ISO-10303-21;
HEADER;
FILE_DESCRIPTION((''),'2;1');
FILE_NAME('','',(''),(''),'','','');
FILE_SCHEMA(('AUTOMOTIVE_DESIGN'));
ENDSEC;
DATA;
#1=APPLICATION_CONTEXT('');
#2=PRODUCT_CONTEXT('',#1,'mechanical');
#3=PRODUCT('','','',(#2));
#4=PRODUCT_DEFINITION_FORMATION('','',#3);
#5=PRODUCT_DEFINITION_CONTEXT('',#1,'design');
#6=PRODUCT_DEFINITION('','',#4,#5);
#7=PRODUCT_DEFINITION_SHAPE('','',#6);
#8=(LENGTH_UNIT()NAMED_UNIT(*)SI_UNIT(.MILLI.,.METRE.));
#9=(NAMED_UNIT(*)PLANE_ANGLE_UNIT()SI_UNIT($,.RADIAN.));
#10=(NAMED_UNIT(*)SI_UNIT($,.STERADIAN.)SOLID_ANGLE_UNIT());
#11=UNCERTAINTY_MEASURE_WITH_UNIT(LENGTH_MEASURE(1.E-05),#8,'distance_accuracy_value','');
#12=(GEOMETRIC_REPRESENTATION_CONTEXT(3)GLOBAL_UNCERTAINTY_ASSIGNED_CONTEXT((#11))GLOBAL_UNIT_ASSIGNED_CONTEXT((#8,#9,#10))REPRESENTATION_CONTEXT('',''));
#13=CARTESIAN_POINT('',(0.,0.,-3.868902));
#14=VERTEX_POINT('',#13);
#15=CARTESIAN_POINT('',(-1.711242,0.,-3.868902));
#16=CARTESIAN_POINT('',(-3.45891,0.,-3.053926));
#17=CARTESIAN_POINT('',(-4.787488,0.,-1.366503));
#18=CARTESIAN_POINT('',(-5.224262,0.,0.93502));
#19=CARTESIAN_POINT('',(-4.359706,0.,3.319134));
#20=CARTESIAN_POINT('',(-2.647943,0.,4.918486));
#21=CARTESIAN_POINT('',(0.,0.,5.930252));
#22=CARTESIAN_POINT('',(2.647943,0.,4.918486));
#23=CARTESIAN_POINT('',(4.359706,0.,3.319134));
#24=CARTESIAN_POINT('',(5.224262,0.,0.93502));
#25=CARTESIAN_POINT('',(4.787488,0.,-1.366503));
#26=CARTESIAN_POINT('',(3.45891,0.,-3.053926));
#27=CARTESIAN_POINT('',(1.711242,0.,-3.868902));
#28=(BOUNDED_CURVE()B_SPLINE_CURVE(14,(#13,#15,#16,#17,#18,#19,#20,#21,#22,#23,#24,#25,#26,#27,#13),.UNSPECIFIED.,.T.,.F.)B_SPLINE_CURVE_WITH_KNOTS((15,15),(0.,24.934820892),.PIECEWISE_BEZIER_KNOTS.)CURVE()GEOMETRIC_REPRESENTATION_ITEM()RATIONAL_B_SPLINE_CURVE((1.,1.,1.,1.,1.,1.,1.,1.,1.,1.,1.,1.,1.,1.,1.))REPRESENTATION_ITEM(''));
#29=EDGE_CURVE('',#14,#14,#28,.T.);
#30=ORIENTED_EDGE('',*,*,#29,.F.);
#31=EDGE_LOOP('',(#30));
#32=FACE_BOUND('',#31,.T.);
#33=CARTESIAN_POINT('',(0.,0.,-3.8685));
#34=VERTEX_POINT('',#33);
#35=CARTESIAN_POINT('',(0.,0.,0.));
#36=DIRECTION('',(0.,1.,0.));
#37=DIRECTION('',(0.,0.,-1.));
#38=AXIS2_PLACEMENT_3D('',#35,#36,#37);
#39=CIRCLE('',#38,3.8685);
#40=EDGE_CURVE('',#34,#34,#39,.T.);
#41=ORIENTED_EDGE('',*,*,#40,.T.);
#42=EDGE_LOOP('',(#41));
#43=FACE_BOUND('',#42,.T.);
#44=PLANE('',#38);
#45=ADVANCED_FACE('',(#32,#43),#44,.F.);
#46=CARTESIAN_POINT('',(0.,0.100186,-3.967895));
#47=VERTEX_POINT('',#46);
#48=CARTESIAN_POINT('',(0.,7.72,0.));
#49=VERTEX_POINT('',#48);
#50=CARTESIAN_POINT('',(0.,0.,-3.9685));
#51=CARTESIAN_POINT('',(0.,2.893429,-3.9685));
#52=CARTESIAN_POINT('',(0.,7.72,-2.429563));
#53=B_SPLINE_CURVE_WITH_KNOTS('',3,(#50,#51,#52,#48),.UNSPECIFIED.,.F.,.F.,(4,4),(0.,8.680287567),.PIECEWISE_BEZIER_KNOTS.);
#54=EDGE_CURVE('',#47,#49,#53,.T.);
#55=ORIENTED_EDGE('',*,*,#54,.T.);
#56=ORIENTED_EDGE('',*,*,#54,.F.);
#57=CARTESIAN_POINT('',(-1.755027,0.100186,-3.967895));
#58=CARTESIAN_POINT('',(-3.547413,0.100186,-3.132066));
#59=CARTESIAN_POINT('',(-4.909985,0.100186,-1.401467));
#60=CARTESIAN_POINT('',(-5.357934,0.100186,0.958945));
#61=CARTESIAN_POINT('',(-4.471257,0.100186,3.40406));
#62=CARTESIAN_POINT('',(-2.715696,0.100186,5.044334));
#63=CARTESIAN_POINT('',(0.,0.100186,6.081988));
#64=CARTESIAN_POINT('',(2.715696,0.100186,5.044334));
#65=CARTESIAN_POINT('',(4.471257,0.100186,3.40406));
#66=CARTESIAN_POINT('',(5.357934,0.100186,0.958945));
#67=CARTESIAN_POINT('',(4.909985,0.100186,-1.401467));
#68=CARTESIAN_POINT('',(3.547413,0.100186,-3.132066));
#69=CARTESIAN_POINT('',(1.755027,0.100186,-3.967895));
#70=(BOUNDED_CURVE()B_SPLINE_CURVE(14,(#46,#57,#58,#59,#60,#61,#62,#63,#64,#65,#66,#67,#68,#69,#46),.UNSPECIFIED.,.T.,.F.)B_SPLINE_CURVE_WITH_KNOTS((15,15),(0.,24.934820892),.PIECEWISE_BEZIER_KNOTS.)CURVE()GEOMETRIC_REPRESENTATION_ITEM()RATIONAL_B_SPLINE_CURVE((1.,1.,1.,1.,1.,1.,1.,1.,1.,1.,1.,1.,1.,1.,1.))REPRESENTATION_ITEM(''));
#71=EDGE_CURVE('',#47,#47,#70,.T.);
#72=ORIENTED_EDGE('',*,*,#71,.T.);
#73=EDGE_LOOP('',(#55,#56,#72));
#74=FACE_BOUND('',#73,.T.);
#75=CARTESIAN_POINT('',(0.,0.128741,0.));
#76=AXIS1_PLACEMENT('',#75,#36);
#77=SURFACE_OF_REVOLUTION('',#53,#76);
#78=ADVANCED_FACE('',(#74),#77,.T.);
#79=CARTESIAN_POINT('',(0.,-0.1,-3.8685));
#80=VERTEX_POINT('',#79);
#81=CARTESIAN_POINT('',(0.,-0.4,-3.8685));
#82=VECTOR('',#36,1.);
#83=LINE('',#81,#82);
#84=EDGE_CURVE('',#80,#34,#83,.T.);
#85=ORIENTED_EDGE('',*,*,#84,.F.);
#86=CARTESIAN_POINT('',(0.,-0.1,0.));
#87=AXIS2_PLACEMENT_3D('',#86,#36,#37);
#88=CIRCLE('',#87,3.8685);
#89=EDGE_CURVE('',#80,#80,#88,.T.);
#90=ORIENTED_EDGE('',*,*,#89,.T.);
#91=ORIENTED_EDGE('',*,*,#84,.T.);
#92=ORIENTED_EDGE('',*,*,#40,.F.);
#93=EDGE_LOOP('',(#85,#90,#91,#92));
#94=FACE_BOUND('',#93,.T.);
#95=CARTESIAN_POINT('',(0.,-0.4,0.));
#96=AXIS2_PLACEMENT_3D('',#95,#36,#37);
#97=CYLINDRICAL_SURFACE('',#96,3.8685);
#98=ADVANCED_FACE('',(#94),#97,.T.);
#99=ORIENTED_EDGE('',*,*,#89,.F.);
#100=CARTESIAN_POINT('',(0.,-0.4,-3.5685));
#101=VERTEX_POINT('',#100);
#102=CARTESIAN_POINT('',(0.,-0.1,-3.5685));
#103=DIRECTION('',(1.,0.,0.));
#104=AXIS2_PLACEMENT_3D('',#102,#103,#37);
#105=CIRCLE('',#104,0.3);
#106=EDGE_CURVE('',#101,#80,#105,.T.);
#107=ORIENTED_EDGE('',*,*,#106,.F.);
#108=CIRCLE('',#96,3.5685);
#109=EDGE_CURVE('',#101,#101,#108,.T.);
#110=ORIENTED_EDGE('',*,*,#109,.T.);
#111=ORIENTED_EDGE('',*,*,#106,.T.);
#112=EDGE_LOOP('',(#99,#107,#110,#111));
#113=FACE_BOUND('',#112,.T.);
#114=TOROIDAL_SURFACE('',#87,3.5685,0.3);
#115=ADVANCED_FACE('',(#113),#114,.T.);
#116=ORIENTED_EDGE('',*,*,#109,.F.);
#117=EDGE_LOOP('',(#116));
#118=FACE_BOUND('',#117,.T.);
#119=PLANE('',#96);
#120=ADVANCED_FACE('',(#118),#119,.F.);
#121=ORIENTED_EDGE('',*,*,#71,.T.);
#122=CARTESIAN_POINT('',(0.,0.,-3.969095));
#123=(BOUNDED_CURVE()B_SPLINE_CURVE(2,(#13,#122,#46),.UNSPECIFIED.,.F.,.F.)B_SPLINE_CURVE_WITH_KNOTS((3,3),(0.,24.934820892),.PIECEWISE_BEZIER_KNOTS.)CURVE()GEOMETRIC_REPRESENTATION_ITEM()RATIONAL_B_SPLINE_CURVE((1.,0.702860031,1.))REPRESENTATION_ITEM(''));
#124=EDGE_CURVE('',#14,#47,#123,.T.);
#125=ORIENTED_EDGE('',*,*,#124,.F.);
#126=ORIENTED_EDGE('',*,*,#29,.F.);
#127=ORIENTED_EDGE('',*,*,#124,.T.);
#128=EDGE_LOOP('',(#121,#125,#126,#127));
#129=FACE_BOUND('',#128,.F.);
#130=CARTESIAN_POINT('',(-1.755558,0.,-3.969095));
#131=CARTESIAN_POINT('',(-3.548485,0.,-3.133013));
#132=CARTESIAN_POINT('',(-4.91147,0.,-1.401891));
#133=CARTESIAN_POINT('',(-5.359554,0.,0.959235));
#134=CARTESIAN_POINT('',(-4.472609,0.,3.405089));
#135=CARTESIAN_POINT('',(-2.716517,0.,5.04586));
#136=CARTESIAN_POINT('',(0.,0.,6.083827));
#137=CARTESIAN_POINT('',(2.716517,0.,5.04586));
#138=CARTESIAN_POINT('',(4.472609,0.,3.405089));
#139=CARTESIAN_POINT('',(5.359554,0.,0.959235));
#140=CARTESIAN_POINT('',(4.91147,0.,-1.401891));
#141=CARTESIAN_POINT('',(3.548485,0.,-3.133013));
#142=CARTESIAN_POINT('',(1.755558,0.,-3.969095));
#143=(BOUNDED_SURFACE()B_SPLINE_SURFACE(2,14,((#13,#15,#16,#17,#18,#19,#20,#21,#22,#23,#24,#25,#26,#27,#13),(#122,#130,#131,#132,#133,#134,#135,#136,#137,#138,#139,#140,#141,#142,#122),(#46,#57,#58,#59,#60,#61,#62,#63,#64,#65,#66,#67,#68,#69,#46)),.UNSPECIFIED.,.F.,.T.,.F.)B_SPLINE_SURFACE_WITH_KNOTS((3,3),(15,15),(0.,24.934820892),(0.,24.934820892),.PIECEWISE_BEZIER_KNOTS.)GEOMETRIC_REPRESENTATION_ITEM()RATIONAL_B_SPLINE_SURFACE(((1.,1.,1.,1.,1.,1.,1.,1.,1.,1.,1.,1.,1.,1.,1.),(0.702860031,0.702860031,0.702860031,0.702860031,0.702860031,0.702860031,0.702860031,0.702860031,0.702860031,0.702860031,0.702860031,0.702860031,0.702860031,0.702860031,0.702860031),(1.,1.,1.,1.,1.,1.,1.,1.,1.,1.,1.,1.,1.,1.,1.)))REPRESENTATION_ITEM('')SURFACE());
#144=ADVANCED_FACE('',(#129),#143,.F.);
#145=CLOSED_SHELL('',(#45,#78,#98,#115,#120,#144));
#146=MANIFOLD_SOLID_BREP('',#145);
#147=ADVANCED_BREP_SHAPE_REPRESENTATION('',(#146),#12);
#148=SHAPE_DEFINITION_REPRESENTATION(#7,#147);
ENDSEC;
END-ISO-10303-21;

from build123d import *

# Parameters (mm, degrees)
F2_R = 0.3
F3_R = 0.099


# Not quite as in the source:
# - a fillet or chamfer is up to 0.001 mm smaller than in the source, because OpenCascade refuses the exact size


with BuildPart() as f1:
    # F0 (on Right) → F1 (revolve)
    with BuildSketch(Plane.YZ):
        with BuildLine():
            Line((0, -3.8685), (0, -3.9685))
            add(Edge.make_bspline(
                [(0, -3.9685), (2.8934291891, -3.9685), (7.72, -2.4295626208), (7.72, 0)],
                knots=[0, 0, 0, 0, 8.6802875672, 8.6802875672, 8.6802875672, 8.6802875672], degree=3))
            Line((7.72, 0), (-0.4, 0))
            Line((-0.4, 0), (-0.4, -3.8685))
            Line((-0.4, -3.8685), (0, -3.8685))
        make_face()
    revolve(axis=Axis((0, 0.1287413618, 0), (0, 1, 0)))

    # F2
    f2_edges = [f1.edges().sort_by_distance(p)[0] for p in [
        (0, -0.4, 3.8685),
    ]]
    fillet(f2_edges, radius=F2_R)

    # F3 (radius 0.1 in the source; OpenCascade refuses exactly that, so slightly less here)
    f3_edges = [f1.edges().sort_by_distance(p)[0] for p in [
        (0, 0, 3.9685),
    ]]
    fillet(f3_edges, radius=F3_R)


solid = f1.part
